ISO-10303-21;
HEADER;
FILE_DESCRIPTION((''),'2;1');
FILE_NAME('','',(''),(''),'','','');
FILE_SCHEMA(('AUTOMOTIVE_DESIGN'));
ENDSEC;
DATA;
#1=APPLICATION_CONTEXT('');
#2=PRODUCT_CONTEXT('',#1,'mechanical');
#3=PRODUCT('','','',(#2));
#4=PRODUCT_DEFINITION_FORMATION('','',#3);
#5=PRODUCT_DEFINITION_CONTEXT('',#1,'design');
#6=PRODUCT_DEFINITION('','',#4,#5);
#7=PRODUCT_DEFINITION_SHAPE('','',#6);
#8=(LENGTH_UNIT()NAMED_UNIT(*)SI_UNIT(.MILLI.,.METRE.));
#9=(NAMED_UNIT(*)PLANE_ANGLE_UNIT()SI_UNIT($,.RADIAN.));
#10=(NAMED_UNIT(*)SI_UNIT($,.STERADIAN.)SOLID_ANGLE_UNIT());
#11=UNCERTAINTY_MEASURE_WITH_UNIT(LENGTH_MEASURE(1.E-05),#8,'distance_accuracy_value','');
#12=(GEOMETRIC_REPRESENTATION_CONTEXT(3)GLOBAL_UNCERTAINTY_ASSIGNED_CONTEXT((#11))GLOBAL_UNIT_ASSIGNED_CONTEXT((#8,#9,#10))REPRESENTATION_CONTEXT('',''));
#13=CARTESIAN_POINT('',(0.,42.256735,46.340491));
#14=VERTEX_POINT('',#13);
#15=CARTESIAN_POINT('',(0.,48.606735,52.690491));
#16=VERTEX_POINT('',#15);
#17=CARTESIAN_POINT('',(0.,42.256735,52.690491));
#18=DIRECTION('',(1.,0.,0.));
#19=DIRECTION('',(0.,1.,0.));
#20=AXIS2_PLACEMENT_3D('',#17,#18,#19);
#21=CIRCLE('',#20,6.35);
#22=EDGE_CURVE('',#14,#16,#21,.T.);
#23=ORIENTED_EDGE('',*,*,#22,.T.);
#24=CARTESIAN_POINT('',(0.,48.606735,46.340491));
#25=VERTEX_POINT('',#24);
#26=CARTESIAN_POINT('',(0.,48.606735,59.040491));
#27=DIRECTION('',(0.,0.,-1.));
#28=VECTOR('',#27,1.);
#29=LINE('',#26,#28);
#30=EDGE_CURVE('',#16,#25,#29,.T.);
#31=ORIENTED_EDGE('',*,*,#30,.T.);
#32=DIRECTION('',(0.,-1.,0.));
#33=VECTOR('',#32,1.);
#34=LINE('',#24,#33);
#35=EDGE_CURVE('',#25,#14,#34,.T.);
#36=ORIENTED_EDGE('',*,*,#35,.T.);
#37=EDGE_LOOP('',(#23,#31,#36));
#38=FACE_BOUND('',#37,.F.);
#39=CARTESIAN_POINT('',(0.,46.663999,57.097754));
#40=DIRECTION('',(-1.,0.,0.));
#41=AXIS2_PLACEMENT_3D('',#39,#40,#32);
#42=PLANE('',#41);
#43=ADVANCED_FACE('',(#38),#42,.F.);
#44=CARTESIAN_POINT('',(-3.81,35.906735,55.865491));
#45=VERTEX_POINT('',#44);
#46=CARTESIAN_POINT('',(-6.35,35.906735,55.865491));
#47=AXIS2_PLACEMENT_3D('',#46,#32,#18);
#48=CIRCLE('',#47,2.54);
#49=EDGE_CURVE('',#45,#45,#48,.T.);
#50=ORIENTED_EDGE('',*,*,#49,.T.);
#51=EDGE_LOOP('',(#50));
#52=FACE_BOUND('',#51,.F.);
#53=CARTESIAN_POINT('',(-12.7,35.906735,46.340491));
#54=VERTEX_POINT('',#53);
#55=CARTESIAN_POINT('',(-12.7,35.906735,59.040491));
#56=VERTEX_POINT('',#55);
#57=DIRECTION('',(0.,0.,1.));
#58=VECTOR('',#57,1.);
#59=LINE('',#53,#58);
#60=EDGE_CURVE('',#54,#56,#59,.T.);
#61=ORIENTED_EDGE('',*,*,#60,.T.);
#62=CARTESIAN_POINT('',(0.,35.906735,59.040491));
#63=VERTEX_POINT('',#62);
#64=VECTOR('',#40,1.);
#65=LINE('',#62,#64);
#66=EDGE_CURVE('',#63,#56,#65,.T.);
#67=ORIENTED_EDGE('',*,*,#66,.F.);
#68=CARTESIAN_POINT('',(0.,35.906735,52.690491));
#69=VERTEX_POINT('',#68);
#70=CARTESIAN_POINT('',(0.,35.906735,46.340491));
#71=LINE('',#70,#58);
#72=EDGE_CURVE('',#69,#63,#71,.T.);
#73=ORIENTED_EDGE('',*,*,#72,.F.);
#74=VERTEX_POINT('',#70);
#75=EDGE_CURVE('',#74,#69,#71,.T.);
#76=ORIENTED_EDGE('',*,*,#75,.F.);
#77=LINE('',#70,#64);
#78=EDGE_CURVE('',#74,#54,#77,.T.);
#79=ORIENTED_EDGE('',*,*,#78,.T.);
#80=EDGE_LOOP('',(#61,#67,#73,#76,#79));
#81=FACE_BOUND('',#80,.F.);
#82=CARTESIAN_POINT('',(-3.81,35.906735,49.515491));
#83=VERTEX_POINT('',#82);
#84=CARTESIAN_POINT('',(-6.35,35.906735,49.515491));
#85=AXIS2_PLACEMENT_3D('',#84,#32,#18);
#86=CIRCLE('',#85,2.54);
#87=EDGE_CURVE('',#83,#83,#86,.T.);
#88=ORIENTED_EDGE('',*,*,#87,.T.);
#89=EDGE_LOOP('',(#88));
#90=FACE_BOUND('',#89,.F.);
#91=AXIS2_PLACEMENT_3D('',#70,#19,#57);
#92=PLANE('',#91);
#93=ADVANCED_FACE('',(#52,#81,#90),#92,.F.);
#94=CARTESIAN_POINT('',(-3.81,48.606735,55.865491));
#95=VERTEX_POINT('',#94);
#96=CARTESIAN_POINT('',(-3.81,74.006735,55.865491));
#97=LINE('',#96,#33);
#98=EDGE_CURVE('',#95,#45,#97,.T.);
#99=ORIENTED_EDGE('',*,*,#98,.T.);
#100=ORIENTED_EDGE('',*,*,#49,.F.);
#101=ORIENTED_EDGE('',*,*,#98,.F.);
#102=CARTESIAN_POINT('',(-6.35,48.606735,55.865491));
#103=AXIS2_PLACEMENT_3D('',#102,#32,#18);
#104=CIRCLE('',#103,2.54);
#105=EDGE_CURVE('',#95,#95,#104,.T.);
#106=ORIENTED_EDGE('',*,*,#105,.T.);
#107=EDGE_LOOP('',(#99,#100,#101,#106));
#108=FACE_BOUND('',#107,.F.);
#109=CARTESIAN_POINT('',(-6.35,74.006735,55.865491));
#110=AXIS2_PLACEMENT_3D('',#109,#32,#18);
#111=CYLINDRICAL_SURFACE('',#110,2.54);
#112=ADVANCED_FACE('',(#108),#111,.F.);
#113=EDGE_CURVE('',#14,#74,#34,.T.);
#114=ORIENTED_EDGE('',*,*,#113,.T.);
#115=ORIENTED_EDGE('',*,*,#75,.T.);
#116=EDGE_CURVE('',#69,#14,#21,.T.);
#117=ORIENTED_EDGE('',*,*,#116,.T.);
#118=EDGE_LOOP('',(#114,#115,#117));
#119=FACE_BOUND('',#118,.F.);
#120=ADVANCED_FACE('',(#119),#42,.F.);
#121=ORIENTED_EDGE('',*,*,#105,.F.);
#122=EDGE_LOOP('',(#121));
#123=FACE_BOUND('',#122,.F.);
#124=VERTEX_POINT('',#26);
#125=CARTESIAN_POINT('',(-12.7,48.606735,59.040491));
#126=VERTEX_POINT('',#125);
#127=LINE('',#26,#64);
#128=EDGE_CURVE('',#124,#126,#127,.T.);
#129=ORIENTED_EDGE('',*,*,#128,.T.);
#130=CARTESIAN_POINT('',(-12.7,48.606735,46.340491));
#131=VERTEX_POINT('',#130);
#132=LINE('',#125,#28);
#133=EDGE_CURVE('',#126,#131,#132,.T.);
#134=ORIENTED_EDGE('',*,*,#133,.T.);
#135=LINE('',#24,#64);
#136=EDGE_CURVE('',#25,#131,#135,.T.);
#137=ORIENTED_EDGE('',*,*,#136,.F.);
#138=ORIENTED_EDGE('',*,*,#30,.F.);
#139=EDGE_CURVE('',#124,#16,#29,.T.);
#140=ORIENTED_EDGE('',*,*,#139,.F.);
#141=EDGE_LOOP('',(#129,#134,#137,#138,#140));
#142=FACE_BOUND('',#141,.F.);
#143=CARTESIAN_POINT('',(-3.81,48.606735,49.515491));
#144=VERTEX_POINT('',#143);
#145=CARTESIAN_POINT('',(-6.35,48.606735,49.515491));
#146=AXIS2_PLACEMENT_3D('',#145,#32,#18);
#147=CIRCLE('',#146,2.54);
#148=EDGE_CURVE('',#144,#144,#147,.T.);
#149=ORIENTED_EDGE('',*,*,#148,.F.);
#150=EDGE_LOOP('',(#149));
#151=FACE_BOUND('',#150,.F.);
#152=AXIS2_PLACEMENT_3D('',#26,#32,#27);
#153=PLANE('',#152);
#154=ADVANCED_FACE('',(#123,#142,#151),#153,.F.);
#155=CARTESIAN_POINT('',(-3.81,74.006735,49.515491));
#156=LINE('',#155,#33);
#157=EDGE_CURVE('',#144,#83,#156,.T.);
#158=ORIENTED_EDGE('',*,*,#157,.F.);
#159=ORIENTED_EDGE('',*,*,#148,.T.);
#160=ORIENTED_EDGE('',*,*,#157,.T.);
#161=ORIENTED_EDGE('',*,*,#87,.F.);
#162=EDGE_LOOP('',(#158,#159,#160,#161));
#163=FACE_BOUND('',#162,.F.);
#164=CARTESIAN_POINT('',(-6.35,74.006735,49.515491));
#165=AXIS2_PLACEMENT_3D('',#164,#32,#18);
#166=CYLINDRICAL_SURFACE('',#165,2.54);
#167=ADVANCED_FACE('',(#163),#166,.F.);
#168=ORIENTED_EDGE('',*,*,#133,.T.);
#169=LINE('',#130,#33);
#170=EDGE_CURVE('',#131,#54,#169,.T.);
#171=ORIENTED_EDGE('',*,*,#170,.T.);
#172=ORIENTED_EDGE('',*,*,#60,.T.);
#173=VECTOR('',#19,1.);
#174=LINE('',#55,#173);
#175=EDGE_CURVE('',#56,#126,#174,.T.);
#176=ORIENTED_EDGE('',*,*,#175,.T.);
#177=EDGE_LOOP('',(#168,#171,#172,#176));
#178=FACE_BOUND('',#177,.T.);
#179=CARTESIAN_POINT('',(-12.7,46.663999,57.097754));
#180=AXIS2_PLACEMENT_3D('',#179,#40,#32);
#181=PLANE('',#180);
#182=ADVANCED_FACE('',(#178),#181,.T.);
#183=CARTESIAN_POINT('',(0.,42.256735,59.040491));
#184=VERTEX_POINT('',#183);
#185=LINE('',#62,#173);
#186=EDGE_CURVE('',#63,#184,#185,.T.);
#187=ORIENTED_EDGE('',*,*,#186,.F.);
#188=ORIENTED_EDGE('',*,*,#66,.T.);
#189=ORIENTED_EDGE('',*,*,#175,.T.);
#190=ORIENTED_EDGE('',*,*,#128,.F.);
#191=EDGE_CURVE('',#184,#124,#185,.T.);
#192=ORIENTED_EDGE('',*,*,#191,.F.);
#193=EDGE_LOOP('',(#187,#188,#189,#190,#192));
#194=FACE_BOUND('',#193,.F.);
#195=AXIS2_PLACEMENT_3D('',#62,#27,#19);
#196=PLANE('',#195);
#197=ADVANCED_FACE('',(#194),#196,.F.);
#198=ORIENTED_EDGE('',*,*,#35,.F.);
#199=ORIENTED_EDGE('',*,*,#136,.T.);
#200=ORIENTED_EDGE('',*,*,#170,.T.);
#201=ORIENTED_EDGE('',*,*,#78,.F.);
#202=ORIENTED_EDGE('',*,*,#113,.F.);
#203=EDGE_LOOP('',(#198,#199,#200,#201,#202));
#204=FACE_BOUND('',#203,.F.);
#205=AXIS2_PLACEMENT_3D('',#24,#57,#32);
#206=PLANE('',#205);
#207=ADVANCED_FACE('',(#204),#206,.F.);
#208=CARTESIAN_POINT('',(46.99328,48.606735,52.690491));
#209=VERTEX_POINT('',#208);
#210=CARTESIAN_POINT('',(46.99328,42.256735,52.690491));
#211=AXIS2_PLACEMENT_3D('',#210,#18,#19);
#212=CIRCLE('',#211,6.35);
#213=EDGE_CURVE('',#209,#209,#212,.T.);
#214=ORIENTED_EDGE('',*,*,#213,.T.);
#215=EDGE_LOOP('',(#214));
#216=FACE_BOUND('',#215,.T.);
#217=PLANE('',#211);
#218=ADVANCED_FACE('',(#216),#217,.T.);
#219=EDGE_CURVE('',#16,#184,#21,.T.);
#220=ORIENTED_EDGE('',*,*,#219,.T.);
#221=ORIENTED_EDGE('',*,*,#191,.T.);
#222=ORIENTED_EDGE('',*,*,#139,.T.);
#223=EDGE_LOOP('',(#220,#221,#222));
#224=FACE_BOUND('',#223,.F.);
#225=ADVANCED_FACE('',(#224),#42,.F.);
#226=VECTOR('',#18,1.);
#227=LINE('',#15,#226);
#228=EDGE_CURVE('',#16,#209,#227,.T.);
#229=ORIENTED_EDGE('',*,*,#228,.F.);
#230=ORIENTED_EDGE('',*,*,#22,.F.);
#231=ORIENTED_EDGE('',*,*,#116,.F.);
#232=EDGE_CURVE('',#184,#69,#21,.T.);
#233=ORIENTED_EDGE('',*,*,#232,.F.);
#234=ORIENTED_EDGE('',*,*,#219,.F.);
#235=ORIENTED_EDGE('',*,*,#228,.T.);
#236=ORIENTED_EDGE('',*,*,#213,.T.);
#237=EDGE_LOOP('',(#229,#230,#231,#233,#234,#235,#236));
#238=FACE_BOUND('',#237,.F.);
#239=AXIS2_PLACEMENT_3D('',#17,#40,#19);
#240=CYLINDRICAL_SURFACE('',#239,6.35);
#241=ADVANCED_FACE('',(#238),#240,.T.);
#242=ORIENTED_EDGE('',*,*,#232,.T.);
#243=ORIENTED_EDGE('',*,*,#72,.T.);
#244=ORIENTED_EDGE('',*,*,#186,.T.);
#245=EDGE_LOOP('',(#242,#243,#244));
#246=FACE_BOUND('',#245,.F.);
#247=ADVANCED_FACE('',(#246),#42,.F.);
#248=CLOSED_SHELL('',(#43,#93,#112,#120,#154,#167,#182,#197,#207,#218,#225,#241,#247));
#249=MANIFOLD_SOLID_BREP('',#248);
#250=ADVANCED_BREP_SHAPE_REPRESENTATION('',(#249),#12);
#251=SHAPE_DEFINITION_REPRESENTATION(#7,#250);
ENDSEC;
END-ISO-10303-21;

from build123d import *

# Parameters (mm, degrees)
F0_R     = 6.35
F1_DEPTH = 46.99328
F3_DEPTH = 12.7
F5_D     = 5.08
F5_DEPTH = 25.4
F5_TIP   = 1.5261859723


with BuildPart() as f1:
    # F0 (on Right) → F1 (new body)
    with BuildSketch(Plane.YZ):
        with Locations((42.2567352653, 52.6904910803)):
            Circle(F0_R)
    extrude(amount=F1_DEPTH)

    # F2 (on face) → F3 (join)
    with BuildSketch(Plane(origin=(0, 0, 0), x_dir=(0, -1, 0), z_dir=(-1, 0, 0))):
        with BuildLine():
            Line((-42.2567352653, 59.0404910803), (-48.6067352653, 59.0404910803))
            Line((-48.6067352653, 59.0404910803), (-48.6067352653, 52.6904910803))
            ThreePointArc((-48.6067352653, 52.6904910803), (-46.7468633258, 57.1806191408), (-42.2567352653, 59.0404910803))
        make_face()
        with BuildLine():
            Line((-35.9067352653, 59.0404910803), (-42.2567352653, 59.0404910803))
            ThreePointArc((-42.2567352653, 59.0404910803), (-37.7666072047, 57.1806191408), (-35.9067352653, 52.6904910803))
            Line((-35.9067352653, 52.6904910803), (-35.9067352653, 59.0404910803))
        make_face()
        with BuildLine():
            ThreePointArc((-35.9067352653, 52.6904910803), (-37.7666072047, 57.1806191408), (-42.2567352653, 59.0404910803))
            ThreePointArc((-42.2567352653, 59.0404910803), (-46.7468633258, 57.1806191408), (-48.6067352653, 52.6904910803))
            ThreePointArc((-48.6067352653, 52.6904910803), (-46.7468633258, 48.2003630197), (-42.2567352653, 46.3404910803))
            ThreePointArc((-42.2567352653, 46.3404910803), (-37.7666072047, 48.2003630197), (-35.9067352653, 52.6904910803))
        make_face()
        with BuildLine():
            ThreePointArc((-42.2567352653, 46.3404910803), (-46.7468633258, 48.2003630197), (-48.6067352653, 52.6904910803))
            Line((-48.6067352653, 52.6904910803), (-48.6067352653, 46.3404910803))
            Line((-48.6067352653, 46.3404910803), (-42.2567352653, 46.3404910803))
        make_face()
        with BuildLine():
            Line((-35.9067352653, 46.3404910803), (-35.9067352653, 52.6904910803))
            ThreePointArc((-35.9067352653, 52.6904910803), (-37.7666072047, 48.2003630197), (-42.2567352653, 46.3404910803))
            Line((-42.2567352653, 46.3404910803), (-35.9067352653, 46.3404910803))
        make_face()
    extrude(amount=F3_DEPTH)

    # F5
    with Locations(Plane(origin=(0, 48.6067352653, 0), x_dir=(-1, 0, 0), z_dir=(0, 1, 0))):
        with Locations((6.35, 55.8654910803), (6.35, 49.5154910803)):
            Hole(F5_D / 2, depth=F5_DEPTH)
            with Locations((0, 0, -(F5_DEPTH + F5_TIP / 2))):  # 118° drill point
                Cone(0, F5_D / 2, F5_TIP, mode=Mode.SUBTRACT)


solid = f1.part
